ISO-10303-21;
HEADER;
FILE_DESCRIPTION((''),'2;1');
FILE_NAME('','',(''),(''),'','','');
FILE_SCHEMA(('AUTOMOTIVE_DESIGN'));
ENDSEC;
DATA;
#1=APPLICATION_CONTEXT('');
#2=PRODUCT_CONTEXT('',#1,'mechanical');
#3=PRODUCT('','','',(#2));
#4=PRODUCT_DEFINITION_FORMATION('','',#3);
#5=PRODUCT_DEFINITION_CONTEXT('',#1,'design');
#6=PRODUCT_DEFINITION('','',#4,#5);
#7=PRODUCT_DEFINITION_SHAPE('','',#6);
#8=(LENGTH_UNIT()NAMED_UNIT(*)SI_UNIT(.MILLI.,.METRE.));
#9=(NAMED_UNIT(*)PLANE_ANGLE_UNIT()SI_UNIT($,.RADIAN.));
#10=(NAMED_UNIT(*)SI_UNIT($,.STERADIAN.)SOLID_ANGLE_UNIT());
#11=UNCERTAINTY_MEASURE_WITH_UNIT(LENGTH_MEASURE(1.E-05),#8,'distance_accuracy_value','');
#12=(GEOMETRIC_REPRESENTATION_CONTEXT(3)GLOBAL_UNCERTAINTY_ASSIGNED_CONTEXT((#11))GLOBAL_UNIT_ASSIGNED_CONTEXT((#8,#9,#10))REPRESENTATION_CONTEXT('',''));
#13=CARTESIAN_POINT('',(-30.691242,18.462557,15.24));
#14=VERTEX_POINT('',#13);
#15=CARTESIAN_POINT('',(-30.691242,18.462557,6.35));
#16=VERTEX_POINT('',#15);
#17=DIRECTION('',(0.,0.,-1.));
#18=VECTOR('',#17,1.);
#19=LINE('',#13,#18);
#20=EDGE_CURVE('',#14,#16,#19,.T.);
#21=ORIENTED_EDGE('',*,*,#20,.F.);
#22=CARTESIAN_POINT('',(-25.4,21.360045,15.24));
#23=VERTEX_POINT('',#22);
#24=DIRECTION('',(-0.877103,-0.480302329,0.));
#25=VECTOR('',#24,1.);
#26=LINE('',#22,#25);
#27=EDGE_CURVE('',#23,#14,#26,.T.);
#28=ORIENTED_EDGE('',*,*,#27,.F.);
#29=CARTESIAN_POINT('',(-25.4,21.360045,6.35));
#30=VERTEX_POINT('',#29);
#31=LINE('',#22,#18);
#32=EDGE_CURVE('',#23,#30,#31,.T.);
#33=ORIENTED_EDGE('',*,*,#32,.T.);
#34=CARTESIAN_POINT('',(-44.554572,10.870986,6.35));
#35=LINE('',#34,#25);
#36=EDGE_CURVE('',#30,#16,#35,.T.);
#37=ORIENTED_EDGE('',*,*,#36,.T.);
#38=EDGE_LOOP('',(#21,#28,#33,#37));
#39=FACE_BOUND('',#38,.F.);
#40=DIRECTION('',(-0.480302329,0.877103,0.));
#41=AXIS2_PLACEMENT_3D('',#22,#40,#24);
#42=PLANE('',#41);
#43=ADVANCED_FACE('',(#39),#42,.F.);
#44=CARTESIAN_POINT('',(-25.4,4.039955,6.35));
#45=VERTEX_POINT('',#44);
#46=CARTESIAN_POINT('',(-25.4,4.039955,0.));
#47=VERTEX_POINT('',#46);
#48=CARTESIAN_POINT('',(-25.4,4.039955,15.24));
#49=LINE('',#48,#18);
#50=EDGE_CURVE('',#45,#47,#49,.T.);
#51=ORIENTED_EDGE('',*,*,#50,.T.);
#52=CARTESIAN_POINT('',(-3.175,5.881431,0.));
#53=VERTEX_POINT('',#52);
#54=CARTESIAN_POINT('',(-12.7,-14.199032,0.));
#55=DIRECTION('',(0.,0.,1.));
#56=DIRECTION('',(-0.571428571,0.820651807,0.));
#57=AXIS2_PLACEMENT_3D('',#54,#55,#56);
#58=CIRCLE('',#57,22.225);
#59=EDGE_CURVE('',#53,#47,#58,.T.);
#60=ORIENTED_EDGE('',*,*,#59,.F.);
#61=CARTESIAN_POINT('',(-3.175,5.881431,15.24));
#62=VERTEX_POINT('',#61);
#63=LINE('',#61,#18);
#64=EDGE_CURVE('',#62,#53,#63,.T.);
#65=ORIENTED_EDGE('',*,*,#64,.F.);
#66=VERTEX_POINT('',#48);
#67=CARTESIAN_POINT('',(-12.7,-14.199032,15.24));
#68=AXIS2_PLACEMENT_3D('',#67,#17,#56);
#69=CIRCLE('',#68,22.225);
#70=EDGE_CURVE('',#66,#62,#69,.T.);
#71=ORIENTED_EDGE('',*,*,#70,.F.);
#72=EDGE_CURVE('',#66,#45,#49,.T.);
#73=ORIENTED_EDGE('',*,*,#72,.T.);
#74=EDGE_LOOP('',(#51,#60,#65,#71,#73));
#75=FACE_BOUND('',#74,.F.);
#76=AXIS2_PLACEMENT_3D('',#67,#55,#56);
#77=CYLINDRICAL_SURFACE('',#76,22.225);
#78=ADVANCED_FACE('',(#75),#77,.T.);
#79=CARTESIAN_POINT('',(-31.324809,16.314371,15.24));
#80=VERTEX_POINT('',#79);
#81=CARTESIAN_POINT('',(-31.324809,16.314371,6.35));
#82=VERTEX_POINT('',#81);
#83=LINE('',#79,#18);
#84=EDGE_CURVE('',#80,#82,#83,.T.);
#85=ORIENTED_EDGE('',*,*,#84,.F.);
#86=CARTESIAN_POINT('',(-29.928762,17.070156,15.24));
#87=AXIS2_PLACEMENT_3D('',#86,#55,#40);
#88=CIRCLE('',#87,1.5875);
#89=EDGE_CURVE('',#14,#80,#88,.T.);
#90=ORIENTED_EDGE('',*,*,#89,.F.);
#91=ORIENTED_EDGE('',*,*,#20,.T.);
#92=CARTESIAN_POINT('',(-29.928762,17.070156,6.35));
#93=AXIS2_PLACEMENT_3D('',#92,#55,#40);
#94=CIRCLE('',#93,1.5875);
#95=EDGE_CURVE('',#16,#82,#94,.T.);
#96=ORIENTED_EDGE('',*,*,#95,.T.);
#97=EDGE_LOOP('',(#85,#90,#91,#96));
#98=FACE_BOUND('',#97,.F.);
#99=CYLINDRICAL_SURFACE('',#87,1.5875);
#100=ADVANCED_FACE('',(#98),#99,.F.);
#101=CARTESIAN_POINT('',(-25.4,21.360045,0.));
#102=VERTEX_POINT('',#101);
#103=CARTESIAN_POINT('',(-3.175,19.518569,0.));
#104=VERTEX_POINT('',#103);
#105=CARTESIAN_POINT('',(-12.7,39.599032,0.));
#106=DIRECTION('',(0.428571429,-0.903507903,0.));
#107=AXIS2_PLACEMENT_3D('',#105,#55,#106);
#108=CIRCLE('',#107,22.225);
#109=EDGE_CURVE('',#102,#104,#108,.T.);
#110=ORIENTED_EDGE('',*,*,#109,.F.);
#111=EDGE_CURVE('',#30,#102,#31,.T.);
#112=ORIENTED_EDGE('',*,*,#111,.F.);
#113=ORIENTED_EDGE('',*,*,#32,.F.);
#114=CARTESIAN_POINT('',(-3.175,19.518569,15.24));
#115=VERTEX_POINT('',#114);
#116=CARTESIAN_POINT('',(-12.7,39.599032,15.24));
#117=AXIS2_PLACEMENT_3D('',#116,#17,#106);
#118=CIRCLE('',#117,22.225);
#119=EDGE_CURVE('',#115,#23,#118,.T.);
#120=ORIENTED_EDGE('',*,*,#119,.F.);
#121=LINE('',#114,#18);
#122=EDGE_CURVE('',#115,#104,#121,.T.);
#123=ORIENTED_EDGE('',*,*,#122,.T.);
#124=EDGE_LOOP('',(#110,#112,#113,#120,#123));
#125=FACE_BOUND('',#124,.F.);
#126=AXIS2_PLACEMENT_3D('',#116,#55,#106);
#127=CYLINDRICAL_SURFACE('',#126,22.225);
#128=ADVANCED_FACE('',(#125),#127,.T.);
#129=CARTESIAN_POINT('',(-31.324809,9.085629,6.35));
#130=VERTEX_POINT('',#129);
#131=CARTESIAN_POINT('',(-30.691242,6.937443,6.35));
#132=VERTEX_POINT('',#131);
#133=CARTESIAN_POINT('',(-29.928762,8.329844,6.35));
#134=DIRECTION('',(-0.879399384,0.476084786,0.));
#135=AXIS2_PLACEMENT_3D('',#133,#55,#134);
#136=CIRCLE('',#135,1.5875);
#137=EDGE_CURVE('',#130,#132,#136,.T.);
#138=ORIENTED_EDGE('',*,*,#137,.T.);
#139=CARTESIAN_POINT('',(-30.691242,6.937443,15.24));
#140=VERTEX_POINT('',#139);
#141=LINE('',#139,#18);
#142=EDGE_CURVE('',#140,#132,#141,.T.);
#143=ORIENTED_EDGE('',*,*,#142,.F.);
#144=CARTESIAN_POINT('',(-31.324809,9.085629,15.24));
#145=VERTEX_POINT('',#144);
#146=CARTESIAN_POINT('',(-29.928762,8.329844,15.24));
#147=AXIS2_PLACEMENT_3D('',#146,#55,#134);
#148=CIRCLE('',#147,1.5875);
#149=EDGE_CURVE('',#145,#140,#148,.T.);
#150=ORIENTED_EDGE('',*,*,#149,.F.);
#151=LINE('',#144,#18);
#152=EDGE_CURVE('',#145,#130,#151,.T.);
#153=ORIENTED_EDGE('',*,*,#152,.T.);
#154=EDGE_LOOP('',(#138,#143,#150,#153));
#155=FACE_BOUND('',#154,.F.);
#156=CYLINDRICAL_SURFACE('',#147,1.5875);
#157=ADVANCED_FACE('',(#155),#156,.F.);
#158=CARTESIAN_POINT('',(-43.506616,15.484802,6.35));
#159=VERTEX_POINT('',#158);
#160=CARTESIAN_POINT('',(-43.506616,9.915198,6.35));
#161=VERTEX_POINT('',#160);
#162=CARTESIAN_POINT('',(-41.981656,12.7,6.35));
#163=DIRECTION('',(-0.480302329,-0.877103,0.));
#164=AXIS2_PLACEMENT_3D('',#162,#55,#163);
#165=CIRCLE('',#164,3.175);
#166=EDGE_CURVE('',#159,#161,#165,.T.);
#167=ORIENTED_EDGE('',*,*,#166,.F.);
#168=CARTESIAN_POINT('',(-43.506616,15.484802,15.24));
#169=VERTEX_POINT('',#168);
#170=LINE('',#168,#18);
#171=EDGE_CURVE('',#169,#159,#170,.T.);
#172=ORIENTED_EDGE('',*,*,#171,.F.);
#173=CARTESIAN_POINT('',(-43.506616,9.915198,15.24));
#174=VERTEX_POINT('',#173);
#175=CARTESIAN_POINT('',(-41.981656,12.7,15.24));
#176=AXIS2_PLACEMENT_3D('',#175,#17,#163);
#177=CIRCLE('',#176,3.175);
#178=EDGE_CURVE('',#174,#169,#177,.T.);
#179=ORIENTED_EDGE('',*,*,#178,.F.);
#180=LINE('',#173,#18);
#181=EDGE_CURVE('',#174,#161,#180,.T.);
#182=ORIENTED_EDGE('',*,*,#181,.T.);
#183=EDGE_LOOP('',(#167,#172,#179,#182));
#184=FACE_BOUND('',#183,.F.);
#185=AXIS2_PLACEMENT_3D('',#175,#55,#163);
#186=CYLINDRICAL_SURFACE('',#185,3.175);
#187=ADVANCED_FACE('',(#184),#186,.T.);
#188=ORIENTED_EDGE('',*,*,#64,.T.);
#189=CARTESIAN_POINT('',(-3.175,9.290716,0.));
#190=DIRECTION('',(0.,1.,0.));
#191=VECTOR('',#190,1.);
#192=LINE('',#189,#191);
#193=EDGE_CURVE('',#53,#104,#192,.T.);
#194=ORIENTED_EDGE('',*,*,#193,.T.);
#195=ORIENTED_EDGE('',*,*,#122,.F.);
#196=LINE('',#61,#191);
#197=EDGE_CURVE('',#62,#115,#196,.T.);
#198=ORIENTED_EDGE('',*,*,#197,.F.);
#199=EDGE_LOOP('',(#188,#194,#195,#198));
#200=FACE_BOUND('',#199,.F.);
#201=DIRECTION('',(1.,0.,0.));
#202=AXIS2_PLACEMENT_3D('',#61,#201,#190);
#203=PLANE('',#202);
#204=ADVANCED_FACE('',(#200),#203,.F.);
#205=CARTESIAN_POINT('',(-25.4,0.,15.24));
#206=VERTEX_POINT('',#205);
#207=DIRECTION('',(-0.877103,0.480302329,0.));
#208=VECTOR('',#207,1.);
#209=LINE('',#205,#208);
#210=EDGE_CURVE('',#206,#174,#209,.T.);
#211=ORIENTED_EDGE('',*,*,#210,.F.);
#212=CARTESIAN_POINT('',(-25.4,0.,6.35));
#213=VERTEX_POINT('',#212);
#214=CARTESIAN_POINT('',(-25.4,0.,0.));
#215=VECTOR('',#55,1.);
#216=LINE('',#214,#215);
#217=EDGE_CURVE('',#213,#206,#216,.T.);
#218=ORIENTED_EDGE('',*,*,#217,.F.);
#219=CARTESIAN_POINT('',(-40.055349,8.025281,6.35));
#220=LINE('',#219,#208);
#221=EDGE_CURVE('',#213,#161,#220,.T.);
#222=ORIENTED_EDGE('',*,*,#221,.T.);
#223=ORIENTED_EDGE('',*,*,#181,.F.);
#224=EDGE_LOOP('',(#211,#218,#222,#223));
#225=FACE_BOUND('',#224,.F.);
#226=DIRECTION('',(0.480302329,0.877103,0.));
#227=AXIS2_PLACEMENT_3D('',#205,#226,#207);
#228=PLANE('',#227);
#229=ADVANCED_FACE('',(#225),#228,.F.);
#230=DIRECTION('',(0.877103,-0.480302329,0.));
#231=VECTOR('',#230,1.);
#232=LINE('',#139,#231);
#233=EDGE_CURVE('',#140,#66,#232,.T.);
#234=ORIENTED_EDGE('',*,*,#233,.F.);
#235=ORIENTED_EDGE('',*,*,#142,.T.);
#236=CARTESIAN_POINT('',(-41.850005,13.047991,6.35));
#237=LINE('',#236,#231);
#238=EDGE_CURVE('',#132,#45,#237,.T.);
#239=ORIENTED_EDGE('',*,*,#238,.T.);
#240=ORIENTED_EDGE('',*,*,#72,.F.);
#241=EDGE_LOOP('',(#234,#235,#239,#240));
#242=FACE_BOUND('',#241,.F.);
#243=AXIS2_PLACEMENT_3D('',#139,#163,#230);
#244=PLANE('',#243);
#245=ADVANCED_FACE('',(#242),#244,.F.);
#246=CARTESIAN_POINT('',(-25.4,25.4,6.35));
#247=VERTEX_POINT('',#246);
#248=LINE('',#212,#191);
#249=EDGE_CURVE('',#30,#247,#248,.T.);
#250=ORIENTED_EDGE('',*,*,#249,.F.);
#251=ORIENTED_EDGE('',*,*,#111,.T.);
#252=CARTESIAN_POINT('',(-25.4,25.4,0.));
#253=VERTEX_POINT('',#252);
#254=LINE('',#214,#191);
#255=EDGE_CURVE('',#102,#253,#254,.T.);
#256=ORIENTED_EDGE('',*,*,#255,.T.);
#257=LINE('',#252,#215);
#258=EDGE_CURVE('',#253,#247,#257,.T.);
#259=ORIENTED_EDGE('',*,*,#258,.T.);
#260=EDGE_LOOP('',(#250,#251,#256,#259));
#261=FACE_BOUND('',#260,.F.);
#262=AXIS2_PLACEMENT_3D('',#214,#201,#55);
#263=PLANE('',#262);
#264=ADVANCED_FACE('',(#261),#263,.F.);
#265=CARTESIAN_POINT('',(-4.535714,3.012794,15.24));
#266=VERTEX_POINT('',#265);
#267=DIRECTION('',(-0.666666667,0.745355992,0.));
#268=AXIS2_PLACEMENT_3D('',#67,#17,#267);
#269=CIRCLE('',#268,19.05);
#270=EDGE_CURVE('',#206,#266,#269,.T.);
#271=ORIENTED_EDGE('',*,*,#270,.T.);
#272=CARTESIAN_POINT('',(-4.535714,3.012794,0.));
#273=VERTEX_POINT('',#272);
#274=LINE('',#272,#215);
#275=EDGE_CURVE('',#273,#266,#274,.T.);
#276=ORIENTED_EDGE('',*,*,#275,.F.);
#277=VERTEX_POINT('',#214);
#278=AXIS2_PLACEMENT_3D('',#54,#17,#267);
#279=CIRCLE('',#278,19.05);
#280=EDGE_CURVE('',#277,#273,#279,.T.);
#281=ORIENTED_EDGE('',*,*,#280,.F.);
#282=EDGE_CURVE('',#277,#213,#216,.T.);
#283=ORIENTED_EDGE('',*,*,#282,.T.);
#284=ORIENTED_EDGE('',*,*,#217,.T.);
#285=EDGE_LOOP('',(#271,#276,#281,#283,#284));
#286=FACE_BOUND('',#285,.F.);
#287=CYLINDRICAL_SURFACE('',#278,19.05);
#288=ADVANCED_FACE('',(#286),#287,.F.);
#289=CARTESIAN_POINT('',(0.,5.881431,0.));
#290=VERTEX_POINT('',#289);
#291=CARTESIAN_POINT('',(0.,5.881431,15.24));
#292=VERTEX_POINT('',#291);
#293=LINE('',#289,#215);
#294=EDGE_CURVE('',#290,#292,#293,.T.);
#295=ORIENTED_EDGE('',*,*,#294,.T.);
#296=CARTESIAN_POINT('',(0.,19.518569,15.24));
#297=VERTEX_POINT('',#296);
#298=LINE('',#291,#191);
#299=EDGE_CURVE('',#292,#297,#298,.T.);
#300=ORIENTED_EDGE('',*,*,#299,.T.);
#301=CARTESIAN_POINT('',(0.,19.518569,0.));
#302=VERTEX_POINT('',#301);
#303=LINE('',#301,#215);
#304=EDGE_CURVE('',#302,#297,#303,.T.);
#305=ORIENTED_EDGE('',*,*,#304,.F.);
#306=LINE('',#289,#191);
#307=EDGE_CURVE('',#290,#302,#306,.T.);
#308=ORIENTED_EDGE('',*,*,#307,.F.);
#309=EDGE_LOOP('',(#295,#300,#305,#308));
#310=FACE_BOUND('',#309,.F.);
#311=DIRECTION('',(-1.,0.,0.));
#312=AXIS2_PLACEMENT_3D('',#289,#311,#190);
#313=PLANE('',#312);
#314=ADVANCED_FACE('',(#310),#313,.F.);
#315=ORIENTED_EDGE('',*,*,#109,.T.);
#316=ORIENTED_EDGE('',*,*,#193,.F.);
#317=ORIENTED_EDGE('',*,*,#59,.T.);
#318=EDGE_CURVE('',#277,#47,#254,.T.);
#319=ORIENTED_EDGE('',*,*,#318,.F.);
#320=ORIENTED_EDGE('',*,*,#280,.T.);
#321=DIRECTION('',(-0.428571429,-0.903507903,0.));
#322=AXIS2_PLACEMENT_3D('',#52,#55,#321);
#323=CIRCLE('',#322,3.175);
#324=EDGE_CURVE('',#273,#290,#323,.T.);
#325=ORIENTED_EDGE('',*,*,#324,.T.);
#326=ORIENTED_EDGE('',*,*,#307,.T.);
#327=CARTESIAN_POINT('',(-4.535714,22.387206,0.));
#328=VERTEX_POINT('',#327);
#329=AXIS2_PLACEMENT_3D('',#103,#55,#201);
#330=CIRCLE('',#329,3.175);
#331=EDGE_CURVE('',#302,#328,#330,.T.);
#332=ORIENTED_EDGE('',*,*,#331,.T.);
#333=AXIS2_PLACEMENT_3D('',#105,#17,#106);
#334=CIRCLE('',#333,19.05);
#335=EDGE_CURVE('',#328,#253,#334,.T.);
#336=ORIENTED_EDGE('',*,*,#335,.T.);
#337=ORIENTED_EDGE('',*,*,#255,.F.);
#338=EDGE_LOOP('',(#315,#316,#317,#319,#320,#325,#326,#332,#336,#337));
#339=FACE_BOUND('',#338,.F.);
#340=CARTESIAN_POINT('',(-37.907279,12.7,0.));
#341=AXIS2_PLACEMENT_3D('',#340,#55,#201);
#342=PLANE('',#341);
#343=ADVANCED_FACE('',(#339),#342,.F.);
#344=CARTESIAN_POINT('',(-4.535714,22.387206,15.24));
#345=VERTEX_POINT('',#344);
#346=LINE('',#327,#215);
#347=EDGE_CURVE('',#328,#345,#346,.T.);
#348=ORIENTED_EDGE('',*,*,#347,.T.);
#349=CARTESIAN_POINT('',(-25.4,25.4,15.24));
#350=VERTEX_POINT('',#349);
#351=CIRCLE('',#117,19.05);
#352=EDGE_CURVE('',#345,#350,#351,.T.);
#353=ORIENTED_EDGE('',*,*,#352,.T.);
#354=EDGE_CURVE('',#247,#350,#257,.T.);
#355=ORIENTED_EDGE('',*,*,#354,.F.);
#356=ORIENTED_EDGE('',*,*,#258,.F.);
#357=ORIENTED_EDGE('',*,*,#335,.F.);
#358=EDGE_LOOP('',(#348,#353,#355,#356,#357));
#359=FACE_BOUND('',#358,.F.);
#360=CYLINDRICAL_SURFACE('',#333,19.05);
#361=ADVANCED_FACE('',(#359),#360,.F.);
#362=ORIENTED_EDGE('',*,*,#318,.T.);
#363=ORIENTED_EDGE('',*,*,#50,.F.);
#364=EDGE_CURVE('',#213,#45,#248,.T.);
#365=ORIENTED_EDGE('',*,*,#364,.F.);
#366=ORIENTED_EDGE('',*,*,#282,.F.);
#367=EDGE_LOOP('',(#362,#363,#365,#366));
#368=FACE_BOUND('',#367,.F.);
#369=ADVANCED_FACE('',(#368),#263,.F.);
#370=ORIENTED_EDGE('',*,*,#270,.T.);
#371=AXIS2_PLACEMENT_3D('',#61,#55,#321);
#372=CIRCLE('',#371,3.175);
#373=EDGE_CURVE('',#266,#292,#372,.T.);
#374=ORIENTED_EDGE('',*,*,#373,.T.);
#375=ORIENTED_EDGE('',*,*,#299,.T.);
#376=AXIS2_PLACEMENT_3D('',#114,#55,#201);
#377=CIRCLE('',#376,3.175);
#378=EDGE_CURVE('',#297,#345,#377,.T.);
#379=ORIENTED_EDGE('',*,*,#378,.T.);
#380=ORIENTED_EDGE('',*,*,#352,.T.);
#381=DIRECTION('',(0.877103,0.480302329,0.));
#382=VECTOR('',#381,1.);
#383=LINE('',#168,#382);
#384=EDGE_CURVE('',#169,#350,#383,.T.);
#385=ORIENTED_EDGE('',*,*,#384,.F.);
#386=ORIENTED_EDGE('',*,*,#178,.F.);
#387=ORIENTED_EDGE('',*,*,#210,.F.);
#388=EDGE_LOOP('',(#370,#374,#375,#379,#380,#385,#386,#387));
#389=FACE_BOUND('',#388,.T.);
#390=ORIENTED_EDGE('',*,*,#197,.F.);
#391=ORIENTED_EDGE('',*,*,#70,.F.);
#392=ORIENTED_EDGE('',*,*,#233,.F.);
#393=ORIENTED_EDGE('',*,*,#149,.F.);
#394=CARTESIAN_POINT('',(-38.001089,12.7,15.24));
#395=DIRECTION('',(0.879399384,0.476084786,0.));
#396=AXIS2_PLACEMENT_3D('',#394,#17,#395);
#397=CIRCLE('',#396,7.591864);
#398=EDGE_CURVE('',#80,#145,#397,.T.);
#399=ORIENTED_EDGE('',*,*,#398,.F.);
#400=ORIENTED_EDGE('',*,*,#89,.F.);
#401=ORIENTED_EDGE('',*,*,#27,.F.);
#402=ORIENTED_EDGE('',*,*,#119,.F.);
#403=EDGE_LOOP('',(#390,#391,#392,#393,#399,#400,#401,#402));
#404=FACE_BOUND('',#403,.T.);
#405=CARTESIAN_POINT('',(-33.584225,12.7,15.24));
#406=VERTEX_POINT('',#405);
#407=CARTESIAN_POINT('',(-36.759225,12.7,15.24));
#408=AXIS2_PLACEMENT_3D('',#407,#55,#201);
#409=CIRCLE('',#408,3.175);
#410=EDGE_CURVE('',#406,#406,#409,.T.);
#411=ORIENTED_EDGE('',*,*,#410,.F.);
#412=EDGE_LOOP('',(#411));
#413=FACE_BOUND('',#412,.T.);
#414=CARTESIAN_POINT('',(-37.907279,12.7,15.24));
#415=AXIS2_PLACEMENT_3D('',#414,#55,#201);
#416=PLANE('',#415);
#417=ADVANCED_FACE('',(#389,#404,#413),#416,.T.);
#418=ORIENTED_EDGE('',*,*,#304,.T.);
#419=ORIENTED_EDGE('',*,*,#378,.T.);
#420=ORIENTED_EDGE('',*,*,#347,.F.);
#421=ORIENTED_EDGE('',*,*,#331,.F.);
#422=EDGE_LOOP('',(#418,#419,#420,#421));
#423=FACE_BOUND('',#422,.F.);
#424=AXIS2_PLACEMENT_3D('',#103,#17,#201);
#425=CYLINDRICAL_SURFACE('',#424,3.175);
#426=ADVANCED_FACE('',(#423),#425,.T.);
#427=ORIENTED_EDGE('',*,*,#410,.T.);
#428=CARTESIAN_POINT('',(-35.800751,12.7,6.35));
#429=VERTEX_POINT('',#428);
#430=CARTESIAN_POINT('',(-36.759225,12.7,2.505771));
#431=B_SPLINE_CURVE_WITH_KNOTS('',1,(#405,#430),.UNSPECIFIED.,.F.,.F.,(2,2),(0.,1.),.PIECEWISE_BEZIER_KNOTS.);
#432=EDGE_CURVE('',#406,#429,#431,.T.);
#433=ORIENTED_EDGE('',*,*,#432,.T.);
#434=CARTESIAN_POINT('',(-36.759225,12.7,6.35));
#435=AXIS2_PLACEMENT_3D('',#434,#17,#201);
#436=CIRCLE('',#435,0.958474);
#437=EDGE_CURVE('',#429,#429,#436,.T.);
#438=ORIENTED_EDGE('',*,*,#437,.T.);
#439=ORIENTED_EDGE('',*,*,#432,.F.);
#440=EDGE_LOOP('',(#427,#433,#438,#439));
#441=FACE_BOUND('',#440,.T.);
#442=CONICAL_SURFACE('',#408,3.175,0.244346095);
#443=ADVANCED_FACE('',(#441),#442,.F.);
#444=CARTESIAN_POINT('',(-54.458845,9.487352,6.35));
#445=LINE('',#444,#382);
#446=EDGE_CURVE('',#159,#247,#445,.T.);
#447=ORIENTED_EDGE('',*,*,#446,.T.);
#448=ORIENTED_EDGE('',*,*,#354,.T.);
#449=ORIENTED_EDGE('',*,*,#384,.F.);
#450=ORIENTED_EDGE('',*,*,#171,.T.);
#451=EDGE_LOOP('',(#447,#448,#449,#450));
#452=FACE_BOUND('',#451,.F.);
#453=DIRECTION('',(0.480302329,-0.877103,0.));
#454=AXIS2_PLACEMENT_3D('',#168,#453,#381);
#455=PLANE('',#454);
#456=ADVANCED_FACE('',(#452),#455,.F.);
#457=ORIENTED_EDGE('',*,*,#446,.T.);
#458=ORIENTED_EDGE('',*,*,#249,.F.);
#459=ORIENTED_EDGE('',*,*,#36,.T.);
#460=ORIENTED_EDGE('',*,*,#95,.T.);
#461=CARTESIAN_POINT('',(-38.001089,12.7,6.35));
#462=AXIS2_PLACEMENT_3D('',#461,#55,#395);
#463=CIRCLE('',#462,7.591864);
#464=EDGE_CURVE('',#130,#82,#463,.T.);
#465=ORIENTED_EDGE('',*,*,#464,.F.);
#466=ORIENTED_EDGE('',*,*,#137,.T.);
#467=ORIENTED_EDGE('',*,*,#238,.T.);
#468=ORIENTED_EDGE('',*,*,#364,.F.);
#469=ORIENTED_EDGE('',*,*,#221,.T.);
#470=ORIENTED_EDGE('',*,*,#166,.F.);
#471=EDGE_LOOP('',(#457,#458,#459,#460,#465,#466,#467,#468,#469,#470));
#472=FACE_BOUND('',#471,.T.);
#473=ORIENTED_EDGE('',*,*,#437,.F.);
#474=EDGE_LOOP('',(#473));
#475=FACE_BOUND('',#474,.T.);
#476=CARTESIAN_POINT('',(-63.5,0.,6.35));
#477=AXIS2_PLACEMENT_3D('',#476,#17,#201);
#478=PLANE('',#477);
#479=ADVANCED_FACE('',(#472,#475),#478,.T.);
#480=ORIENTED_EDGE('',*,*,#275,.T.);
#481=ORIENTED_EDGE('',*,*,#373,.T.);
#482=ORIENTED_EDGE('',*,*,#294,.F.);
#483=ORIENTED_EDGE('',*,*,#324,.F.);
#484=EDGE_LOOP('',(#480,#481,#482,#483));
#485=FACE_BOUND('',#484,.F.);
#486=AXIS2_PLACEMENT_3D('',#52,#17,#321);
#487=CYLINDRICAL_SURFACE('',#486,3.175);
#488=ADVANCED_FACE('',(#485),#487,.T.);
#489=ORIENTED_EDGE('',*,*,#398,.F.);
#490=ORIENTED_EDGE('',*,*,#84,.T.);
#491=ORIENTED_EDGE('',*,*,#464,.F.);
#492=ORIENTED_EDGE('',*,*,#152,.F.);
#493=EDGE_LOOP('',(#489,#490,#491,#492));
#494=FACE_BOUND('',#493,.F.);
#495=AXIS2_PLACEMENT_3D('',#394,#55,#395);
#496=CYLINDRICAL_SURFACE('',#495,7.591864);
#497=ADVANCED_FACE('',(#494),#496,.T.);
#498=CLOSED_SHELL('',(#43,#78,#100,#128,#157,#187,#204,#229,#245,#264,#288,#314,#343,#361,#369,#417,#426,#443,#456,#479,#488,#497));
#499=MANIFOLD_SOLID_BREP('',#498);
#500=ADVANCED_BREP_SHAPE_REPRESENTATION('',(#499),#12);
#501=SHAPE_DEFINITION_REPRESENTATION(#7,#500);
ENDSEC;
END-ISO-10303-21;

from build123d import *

# Parameters (mm, degrees)
F1_DEPTH = 15.24
F2_R     = 3.175
F5_DEPTH = 15.241
F6_W     = 38.1
F6_H     = 6.35
F7_DEPTH = 25.401


# Not quite as in the source:
# - an extrude whose draft closes it to a point is written as a loft to that point


with BuildPart() as f1:
    # F0 (on Top) → F1 (new body)
    with BuildSketch(Plane.XY):
        with BuildLine():
            ThreePointArc((-25.4, 25.4), (-53.7980633142, 12.7), (-25.4, 0))
            Line((-25.4, 0), (-34.5618496597, 0))
            Line((-34.5618496597, 0), (-34.5618496597, 25.4))
            Line((-34.5618496597, 25.4), (-25.4, 25.4))
        make_face()
        with BuildLine():
            Line((-34.5618496597, 0), (-25.4, 0))
            ThreePointArc((-25.4, 0), (-21.204965459, 5.7439235197), (-19.7203873372, 12.7))
            ThreePointArc((-19.7203873372, 12.7), (-21.204965459, 19.6560764803), (-25.4, 25.4))
            Line((-25.4, 25.4), (-34.5618496597, 25.4))
            Line((-34.5618496597, 25.4), (-34.5618496597, 0))
        make_face()
        with BuildLine():
            ThreePointArc((-19.7203873372, 12.7), (-21.204965459, 5.7439235197), (-25.4, 0))
            ThreePointArc((-25.4, 0), (-15.4225737421, 4.6554132358), (-4.5357142857, 3.0127938932))
            ThreePointArc((-4.5357142857, 3.0127938932), (-1.4778911139, 3.1980667262), (0, 5.8814314849))
            Line((0, 5.8814314849), (0, 19.5185685151))
            ThreePointArc((0, 19.5185685151), (-1.4778911139, 22.2019332738), (-4.5357142857, 22.3872061068))
            ThreePointArc((-4.5357142857, 22.3872061068), (-15.4225737421, 20.7445867642), (-25.4, 25.4))
            ThreePointArc((-25.4, 25.4), (-21.204965459, 19.6560764803), (-19.7203873372, 12.7))
        make_face()
    extrude(amount=F1_DEPTH)

    # F2 (on face) → F3 section 0
    with BuildSketch(Plane.XY.offset(15.24), mode=Mode.PRIVATE) as f3_s0:
        with Locations((-36.7592253257, 12.7)):
            Circle(F2_R)
    loft([f3_s0.sketch, Vertex(-36.7592253257, 12.7, 2.505770536)], ruled=True, mode=Mode.SUBTRACT)

    # F4 (on face) → F5 (cut, through all)
    with BuildSketch(Plane.XY.offset(15.24)):
        with BuildLine():
            ThreePointArc((-25.4, 4.0399547456), (-14.535188109, 7.9500701216), (-3.175, 5.8814314849))
            Line((-3.175, 5.8814314849), (-3.175, 19.5185685151))
            ThreePointArc((-3.175, 19.5185685151), (-14.535188109, 17.4499298784), (-25.4, 21.3600452544))
            Line((-25.4, 21.3600452544), (-30.6912422422, 18.4625566245))
            ThreePointArc((-30.6912422422, 18.4625566245), (-31.4514193427, 17.5192344091), (-31.3248088175, 16.3143710139))
            ThreePointArc((-31.3248088175, 16.3143710139), (-30.4092253257, 12.7), (-31.3248088175, 9.0856289861))
            ThreePointArc((-31.3248088175, 9.0856289861), (-31.4514193427, 7.8807655909), (-30.6912422422, 6.9374433755))
            Line((-30.6912422422, 6.9374433755), (-25.4, 4.0399547456))
        make_face()
        with BuildLine():
            ThreePointArc((-25.4, 25.4), (-53.7980633142, 12.7), (-25.4, 0))
            Line((-25.4, 0), (-43.5066161293, 9.9151979742))
            ThreePointArc((-43.5066161293, 9.9151979742), (-45.1566562358, 12.7), (-43.5066161293, 15.4848020258))
            Line((-43.5066161293, 15.4848020258), (-25.4, 25.4))
        make_face()
    extrude(amount=-F5_DEPTH, mode=Mode.SUBTRACT)

    # F6 (on Front) → F7 (cut, through all)
    with BuildSketch(Plane.XZ):
        with Locations((-44.45, 3.175)):
            Rectangle(F6_W, F6_H)
    extrude(amount=-F7_DEPTH, mode=Mode.SUBTRACT)


solid = f1.part
